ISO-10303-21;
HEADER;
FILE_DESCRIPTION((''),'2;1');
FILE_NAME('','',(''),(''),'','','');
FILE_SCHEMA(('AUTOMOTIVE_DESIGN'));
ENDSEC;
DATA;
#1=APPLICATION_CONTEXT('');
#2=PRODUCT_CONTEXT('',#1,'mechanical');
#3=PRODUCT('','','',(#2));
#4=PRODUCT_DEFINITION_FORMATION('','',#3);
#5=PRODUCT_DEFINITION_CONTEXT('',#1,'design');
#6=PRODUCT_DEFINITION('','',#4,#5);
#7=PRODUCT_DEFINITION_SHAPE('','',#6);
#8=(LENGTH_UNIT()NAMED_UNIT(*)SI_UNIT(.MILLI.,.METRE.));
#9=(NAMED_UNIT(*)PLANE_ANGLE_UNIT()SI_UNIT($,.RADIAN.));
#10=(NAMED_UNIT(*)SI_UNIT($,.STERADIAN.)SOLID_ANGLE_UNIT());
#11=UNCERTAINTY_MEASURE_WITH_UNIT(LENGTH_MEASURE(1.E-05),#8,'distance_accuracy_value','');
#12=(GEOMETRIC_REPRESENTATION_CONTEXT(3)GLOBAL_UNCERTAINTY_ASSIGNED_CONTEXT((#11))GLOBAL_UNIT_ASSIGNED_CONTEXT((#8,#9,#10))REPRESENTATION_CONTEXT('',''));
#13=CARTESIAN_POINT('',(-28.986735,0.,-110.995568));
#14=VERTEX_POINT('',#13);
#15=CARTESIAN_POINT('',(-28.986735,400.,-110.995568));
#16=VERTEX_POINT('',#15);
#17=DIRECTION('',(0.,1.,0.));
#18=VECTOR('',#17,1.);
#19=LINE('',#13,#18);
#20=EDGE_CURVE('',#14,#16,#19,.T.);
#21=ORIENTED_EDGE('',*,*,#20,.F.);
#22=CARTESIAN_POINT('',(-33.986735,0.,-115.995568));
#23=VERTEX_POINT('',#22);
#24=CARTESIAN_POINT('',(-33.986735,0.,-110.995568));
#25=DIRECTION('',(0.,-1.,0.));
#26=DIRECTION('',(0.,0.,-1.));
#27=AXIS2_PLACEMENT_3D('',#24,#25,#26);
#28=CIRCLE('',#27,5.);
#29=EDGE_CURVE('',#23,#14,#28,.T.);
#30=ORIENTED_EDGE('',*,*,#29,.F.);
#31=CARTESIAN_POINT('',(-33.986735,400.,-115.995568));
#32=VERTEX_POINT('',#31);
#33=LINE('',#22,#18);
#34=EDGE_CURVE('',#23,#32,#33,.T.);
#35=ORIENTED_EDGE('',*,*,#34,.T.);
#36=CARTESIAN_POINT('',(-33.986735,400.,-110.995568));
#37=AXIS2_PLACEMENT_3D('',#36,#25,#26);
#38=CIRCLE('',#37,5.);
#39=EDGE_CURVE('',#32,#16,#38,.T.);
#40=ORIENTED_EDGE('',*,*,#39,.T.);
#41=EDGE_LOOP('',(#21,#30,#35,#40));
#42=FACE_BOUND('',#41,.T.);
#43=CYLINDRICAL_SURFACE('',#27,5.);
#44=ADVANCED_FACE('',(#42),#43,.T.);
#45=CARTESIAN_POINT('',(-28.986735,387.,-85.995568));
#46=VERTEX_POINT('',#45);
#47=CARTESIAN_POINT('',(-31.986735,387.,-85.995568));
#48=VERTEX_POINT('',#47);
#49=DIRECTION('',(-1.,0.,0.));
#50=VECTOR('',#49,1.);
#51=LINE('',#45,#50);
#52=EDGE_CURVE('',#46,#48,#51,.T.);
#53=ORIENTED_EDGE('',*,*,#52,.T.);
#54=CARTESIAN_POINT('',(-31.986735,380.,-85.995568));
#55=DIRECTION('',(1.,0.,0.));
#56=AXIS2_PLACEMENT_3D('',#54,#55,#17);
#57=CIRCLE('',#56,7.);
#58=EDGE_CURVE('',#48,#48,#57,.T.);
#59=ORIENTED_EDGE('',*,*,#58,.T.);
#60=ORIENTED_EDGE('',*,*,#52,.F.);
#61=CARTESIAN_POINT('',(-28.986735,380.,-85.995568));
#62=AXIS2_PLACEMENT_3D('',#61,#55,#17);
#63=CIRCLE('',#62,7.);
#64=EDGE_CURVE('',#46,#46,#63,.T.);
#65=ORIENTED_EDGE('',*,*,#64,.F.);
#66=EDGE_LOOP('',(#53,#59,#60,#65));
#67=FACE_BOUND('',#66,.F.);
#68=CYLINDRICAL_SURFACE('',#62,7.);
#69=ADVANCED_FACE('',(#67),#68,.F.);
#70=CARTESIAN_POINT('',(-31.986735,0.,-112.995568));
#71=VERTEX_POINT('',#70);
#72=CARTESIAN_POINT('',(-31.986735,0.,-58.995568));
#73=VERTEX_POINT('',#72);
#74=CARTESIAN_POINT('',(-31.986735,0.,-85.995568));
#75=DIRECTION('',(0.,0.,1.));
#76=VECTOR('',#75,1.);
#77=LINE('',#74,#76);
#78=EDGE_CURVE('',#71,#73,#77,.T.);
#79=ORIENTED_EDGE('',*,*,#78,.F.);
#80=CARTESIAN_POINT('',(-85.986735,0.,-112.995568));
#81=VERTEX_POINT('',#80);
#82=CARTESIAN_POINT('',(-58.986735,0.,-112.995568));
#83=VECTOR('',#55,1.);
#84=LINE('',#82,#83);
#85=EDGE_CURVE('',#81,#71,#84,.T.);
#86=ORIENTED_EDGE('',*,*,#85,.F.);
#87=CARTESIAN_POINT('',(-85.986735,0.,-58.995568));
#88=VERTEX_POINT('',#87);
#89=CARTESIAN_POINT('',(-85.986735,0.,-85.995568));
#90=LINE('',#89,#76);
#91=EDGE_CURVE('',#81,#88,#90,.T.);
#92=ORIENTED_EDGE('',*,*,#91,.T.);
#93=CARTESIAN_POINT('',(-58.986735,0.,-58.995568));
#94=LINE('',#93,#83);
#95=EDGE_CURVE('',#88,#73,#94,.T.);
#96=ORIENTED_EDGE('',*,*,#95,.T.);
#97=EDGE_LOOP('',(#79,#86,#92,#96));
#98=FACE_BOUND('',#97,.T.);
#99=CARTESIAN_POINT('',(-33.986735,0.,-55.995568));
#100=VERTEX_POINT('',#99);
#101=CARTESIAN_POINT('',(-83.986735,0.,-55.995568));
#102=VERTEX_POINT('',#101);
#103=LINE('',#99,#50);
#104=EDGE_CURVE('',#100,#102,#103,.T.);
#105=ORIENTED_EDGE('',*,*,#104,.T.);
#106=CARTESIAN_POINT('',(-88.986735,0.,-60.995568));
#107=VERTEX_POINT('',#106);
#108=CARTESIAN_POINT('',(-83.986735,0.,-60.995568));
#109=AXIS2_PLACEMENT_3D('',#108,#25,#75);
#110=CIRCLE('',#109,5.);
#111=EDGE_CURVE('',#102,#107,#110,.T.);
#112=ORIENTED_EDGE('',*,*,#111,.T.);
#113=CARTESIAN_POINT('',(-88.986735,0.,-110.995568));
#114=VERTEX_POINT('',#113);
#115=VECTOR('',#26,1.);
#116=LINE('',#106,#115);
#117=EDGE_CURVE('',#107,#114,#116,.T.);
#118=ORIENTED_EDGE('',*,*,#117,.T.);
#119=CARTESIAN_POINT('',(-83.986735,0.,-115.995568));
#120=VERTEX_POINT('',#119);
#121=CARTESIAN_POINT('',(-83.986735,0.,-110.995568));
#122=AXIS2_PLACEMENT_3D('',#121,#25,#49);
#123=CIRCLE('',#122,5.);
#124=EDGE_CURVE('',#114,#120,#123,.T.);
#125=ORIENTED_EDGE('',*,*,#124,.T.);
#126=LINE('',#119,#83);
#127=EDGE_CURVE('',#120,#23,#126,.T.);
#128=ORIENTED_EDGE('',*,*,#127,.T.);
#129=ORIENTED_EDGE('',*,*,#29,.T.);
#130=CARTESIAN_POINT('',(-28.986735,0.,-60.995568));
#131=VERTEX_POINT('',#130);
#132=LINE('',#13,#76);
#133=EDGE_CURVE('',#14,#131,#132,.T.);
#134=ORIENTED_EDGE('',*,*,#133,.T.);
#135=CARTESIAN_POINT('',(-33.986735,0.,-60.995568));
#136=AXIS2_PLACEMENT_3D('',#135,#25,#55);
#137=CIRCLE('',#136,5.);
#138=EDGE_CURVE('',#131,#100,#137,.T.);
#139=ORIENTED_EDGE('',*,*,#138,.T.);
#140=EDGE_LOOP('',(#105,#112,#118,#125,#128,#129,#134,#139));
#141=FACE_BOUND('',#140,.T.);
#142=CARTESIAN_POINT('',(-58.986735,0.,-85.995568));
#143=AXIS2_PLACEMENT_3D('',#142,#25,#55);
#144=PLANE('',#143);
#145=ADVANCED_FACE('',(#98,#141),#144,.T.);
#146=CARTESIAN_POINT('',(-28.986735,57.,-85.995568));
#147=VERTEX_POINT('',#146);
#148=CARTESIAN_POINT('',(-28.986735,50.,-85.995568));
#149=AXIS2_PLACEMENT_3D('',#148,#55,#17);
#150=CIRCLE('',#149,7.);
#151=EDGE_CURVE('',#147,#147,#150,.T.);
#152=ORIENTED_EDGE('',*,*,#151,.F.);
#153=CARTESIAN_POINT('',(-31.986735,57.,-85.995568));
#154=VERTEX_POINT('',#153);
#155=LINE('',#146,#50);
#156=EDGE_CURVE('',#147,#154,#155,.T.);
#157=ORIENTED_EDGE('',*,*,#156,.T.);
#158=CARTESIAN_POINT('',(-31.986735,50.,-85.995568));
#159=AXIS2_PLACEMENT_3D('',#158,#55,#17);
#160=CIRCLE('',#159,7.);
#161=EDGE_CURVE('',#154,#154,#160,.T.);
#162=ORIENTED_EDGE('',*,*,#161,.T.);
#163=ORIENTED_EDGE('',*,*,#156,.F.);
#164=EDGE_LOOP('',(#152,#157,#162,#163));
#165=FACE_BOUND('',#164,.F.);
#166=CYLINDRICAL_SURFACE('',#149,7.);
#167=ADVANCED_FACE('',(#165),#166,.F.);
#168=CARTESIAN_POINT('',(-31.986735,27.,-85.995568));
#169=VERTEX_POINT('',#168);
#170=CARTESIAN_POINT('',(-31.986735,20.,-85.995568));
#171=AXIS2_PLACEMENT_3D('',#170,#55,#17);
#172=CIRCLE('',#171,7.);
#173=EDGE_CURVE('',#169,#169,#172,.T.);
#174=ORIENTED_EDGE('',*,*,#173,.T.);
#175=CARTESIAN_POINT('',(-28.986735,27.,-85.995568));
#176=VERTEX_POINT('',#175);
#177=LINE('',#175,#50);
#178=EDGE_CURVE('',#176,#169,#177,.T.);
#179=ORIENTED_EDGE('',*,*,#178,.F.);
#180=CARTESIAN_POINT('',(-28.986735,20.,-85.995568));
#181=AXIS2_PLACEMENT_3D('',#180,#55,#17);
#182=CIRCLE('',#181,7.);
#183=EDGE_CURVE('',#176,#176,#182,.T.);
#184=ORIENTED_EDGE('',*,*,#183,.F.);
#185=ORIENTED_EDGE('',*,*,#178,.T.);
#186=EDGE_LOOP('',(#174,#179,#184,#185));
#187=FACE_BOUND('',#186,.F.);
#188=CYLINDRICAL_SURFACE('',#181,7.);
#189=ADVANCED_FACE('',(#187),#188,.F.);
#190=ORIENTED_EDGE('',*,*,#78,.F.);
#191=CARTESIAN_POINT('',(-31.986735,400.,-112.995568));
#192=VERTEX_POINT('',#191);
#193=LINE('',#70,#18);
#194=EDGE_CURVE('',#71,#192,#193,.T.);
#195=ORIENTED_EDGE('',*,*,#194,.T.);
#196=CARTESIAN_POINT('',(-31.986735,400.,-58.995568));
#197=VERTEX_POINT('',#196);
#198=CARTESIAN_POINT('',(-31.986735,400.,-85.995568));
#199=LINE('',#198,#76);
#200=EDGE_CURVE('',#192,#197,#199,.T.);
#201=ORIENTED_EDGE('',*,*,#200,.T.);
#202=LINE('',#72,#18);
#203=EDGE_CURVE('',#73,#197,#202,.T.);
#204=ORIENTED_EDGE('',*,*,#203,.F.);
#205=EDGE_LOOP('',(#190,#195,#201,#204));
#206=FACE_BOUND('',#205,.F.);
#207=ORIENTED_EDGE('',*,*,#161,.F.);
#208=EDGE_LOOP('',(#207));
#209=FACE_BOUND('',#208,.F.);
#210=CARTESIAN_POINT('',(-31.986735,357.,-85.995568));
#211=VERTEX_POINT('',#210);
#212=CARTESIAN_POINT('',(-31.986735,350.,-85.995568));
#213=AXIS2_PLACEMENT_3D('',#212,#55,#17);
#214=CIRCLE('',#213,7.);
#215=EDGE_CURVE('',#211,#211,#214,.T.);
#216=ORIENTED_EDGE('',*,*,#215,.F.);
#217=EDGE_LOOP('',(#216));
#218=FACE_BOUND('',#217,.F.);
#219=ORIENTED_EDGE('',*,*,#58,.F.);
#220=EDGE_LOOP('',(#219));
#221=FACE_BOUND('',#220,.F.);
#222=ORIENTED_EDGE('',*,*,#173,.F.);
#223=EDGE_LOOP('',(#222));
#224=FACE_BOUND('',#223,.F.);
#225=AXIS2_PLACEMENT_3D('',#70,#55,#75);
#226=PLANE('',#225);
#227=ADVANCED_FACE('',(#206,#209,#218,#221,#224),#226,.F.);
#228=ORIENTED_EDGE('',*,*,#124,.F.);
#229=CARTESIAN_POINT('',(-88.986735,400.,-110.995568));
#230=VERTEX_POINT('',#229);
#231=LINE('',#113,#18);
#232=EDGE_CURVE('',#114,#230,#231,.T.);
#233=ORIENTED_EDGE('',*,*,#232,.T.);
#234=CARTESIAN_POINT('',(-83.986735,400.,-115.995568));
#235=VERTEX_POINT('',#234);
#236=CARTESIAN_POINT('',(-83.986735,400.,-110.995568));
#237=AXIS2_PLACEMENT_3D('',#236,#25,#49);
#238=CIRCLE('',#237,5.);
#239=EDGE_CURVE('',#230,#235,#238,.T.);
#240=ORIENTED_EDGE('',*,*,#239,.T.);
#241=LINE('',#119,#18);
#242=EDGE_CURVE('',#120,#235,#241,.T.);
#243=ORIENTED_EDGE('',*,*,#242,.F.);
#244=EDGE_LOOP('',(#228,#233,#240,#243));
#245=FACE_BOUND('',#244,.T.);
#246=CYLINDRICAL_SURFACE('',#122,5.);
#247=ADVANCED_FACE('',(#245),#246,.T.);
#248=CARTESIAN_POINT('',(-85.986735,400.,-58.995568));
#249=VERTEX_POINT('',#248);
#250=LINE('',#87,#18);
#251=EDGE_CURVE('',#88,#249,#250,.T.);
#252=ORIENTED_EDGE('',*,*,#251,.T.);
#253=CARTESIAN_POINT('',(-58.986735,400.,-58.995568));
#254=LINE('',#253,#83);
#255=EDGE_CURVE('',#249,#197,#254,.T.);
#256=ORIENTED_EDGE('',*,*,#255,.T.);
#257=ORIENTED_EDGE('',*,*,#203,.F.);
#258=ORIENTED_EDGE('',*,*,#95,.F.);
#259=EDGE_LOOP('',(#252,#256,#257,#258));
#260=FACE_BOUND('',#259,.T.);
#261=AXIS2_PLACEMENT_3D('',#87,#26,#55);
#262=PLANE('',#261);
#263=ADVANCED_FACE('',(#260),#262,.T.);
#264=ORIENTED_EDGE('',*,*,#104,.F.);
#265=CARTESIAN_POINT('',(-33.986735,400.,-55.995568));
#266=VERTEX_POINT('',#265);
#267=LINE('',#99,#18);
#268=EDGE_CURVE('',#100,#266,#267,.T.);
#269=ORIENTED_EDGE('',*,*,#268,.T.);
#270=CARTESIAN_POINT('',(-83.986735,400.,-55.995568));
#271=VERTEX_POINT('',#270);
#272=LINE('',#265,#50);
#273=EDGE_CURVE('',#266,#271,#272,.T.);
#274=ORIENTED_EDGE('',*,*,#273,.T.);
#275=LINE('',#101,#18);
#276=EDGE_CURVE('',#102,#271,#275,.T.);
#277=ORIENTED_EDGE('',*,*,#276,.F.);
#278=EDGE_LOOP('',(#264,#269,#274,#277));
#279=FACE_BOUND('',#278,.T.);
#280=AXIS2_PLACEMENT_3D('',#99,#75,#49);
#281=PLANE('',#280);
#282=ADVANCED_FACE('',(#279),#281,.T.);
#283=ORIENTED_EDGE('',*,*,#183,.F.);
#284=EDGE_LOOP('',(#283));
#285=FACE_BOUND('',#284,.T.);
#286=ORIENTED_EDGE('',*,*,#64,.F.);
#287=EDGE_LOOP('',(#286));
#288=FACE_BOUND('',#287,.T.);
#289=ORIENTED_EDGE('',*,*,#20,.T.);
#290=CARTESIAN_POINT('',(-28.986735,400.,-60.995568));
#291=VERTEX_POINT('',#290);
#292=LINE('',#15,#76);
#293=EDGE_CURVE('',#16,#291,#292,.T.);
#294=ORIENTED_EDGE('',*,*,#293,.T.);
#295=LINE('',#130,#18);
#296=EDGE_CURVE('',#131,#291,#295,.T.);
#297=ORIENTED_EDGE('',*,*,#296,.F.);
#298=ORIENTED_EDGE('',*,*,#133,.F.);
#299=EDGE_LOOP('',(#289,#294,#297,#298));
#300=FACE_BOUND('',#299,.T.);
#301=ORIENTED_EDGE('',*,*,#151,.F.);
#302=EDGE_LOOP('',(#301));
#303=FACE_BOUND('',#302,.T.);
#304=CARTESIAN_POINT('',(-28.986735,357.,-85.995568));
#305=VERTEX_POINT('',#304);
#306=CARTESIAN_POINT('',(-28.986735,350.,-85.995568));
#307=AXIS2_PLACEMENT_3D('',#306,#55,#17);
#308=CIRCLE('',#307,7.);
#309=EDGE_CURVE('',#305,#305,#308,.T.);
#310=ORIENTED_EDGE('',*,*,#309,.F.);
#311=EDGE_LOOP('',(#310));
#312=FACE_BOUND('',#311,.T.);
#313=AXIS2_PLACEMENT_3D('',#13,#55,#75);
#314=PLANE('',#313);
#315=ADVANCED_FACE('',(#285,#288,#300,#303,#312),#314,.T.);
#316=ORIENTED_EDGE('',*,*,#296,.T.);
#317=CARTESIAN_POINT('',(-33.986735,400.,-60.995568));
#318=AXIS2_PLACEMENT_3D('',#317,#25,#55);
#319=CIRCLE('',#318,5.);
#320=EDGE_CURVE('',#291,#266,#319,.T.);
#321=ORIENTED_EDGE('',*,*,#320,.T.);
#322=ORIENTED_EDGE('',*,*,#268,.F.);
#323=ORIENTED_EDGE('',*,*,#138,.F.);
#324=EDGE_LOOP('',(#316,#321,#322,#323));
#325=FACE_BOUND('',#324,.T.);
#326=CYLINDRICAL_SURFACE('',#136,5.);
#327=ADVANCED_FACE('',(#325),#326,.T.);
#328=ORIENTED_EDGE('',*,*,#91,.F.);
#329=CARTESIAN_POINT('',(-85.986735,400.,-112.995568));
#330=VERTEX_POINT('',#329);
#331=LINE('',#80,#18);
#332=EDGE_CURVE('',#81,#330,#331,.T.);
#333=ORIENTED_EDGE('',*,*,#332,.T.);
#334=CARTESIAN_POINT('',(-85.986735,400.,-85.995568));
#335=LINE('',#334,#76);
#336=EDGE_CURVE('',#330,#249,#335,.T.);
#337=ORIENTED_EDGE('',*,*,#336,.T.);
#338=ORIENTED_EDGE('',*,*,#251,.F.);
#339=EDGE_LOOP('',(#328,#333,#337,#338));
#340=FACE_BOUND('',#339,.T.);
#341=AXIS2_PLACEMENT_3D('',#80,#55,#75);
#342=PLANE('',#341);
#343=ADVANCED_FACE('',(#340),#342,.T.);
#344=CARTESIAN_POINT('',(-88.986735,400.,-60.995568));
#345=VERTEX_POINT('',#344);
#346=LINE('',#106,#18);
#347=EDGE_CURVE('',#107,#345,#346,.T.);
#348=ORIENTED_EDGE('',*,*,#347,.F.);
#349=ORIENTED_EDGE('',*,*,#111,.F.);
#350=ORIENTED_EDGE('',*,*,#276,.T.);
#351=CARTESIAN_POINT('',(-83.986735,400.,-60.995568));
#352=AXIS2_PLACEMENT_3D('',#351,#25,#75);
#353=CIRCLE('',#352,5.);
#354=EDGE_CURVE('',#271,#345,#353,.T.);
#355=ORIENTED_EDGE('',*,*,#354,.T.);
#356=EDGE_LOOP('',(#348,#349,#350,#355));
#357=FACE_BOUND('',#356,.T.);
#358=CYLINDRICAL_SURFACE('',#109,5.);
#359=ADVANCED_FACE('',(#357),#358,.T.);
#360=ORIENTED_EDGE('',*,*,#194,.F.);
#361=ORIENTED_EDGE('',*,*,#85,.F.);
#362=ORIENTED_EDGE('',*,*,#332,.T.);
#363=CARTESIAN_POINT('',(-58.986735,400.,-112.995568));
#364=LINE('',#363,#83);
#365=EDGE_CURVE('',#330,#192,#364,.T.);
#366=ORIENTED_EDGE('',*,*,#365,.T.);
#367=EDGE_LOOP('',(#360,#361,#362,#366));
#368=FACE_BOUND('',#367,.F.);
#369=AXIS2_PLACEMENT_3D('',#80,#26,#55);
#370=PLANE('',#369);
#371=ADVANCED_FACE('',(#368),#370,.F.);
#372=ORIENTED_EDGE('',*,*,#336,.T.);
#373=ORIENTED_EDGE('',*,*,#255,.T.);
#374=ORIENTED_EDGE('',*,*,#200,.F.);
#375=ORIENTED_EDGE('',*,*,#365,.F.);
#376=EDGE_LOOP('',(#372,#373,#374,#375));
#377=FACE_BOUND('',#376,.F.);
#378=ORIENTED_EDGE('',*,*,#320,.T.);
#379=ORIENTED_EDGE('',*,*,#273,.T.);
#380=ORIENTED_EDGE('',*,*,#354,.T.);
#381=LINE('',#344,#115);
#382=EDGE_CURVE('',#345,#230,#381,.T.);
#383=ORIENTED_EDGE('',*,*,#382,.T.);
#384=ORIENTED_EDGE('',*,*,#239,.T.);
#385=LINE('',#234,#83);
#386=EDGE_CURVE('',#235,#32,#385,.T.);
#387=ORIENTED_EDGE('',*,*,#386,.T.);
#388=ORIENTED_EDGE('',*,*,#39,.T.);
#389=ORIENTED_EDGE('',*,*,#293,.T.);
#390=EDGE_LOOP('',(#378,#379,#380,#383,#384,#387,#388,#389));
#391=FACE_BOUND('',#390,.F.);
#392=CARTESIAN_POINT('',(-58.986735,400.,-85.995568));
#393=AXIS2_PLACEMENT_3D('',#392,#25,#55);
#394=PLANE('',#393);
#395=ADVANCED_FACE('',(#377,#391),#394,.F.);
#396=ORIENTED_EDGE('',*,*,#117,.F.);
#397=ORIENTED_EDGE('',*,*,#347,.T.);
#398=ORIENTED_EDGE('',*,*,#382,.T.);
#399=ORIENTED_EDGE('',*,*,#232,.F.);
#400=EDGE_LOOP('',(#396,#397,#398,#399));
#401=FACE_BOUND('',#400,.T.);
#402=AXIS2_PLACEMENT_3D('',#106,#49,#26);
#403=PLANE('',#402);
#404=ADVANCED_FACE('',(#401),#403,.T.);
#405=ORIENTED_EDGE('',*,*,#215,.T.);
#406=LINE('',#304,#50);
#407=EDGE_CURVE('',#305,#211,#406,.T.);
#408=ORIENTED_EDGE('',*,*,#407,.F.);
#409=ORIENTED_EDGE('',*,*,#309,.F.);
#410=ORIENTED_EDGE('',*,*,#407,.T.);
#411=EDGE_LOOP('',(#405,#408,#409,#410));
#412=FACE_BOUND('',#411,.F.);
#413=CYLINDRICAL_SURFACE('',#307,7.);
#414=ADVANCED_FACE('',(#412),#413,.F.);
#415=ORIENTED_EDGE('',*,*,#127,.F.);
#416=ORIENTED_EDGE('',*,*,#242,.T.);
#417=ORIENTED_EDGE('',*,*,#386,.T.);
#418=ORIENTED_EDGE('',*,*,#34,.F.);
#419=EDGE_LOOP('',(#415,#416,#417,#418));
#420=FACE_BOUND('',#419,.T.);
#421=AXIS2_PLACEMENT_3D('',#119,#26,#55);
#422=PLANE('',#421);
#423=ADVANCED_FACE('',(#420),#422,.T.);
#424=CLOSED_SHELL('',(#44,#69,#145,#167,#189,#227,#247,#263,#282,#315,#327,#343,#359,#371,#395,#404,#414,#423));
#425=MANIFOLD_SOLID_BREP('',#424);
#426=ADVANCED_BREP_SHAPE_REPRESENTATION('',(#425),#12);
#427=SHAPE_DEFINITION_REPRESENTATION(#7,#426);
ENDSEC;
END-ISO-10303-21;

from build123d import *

# Parameters (mm, degrees)
F0_W     = 54
F0_H     = 54
F1_DEPTH = 400
F2_R     = 7
F3_DEPTH = 3


# Not quite as in the source:
# - a feature names something its author has since deleted; it is built from what else it names


with BuildPart() as f1:
    # F0 (on Front) → F1 (new body)
    with BuildSketch(Plane.XZ):
        with BuildLine():
            ThreePointArc((-28.9867345989, -60.995567819), (-30.4512006929, -57.460033913), (-33.9867345989, -55.995567819))
            Line((-33.9867345989, -55.995567819), (-83.9867345989, -55.995567819))
            ThreePointArc((-83.9867345989, -55.995567819), (-87.5222685048, -57.460033913), (-88.9867345989, -60.995567819))
            Line((-88.9867345989, -60.995567819), (-88.9867345989, -110.995567819))
            ThreePointArc((-88.9867345989, -110.995567819), (-87.5222685048, -114.5311017249), (-83.9867345989, -115.995567819))
            Line((-83.9867345989, -115.995567819), (-33.9867345989, -115.995567819))
            ThreePointArc((-33.9867345989, -115.995567819), (-30.4512006929, -114.5311017249), (-28.9867345989, -110.995567819))
            Line((-28.9867345989, -110.995567819), (-28.9867345989, -60.995567819))
        make_face()
        with Locations((-58.9867345989, -85.995567819)):
            Rectangle(F0_W, F0_H, mode=Mode.SUBTRACT)
    extrude(amount=-F1_DEPTH)

    # F2 (on face) → F3 (cut, through all)
    with BuildSketch(Plane.YZ.offset(-28.9867345989)):
        with Locations((20, -85.995567819)):
            Circle(F2_R)
        with Locations((50, -85.995567819)):
            Circle(F2_R)
        with Locations((350, -85.995567819)):
            Circle(F2_R)
        with Locations((380, -85.995567819)):
            Circle(F2_R)
    extrude(amount=-F3_DEPTH, mode=Mode.SUBTRACT)


solid = f1.part
